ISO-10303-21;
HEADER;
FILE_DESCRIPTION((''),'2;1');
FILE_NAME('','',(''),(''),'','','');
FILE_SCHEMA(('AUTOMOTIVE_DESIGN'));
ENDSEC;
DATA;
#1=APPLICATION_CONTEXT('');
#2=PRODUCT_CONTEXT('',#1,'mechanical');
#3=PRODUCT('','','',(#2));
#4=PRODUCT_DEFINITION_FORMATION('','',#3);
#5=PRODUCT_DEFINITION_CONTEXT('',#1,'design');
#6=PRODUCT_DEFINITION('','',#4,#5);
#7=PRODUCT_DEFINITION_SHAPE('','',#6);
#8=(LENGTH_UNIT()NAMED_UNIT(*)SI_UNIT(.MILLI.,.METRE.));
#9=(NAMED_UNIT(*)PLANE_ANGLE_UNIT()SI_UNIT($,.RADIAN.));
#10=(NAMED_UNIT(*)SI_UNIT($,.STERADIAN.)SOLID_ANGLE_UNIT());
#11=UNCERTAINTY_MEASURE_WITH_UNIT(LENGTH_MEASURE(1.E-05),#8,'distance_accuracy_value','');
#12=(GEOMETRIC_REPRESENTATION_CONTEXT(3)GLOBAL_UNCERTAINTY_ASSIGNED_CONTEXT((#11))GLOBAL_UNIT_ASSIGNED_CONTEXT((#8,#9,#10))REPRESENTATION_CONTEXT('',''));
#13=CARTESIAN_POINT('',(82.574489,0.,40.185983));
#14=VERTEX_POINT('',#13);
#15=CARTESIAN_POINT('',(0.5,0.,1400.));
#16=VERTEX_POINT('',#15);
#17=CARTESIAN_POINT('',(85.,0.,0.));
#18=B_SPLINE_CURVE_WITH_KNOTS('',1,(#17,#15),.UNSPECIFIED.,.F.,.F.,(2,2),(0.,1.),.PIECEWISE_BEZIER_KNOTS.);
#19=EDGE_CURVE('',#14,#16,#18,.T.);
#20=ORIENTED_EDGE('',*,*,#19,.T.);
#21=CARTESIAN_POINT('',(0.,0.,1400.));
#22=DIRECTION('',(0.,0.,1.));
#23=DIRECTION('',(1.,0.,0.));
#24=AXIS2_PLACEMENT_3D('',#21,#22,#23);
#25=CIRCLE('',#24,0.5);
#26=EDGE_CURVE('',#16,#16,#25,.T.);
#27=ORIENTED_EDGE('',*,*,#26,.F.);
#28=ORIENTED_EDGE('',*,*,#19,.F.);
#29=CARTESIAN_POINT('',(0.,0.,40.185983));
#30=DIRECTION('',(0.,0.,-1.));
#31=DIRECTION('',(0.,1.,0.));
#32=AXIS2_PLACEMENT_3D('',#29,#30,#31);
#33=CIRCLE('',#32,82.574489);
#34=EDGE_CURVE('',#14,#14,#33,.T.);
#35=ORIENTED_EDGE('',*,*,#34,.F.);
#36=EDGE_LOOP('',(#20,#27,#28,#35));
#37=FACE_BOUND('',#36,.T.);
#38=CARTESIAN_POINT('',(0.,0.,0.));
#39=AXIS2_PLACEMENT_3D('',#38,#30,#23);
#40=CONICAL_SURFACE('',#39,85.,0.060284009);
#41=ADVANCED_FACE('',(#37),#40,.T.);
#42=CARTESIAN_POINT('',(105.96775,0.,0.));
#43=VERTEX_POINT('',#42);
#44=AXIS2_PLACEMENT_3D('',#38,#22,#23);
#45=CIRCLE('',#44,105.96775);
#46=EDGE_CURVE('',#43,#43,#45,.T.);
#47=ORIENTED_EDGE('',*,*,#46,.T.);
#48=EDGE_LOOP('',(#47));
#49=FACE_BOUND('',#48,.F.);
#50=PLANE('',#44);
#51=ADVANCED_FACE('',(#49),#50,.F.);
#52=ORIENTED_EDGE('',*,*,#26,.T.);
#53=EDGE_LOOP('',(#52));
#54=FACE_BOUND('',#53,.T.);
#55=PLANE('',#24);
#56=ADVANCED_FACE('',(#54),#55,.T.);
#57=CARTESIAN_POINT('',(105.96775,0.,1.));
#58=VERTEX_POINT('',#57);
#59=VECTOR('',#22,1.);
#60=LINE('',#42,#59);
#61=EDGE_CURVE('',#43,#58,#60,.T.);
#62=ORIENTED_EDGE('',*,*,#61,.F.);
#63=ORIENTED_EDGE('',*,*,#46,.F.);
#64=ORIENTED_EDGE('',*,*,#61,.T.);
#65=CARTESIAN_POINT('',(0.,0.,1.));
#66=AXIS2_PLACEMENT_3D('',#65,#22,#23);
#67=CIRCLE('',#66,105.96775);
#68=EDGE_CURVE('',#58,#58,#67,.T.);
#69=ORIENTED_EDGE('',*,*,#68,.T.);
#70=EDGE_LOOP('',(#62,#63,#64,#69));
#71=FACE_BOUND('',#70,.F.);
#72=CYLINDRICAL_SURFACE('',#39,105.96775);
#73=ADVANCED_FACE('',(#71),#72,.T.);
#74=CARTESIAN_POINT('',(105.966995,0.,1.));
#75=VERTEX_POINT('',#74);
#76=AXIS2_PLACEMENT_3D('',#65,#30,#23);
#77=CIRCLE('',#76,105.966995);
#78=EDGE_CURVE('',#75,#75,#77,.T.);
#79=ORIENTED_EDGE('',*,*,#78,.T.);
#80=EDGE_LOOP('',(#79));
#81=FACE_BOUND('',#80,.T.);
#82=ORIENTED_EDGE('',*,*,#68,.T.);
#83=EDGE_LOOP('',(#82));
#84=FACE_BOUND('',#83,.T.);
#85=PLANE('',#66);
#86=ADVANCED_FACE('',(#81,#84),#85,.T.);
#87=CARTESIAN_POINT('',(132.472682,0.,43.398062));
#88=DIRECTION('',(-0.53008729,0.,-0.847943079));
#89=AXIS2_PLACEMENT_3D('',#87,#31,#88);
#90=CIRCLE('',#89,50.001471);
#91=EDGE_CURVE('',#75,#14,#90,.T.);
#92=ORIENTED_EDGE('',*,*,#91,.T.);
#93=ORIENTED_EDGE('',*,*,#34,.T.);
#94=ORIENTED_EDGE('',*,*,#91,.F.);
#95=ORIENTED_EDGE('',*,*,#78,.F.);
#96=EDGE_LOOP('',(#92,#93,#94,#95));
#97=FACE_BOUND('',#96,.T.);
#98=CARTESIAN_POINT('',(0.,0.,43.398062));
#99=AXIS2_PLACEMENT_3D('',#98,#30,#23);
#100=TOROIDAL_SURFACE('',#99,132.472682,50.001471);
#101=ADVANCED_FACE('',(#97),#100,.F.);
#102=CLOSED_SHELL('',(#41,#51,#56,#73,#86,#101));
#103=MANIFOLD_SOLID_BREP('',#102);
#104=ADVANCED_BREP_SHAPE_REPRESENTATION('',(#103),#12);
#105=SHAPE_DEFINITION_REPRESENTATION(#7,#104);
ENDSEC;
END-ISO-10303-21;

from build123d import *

# Parameters (mm, degrees)
F0_R     = 85
F2_R     = 0.5
F4_R     = 105.9677495378
F5_DEPTH = 1


# Not quite as in the source:
# - a fillet or chamfer that OpenCascade refuses, or shapes differently, is made with other operations: its cross-section is extruded or revolved along the edge and cut away or added


with BuildPart() as f3:
    # F0 (on Top) → F3 section 0
    with BuildSketch(Plane.XY):
        Circle(F0_R)
    # F2 (on offset) → F3 section 1
    with BuildSketch(Plane.XY.offset(1400)):
        Circle(F2_R)
    loft()

    # F4 (on Top) → F5 (join)
    with BuildSketch(Plane.XY):
        Circle(F4_R)
    extrude(amount=F5_DEPTH)

    # F6: fillet of radius 50 on 1 edges, made by hand


with BuildPart() as f6_tool2:
    # F6_s3 → F6_t4 (revolve)
    with BuildSketch(Plane.XZ):
        with BuildLine():
            ThreePointArc((105.9675375029, 0.9996608228), (89.4883112296, 17.8541588617), (82.5620399387, 40.3855984233))
            Line((82.5620399387, 40.3855984233), (77.5709757484, 40.0843520489))
            ThreePointArc((77.5709757484, 40.0843520489), (78.7599768444, 20.3915648868), (79.9485786669, 0.6987536257))
            Line((79.9485786669, 0.6987536257), (84.9396428571, -4.0001471107))
            ThreePointArc((84.9396428571, -4.0001471107), (95.45359018, -4.0001471107), (103.3170230691, -3.2401793116))
            Line((103.3170230691, -3.2401793116), (105.9675375029, 0.9996608228))
        make_face()
    revolve(axis=Axis((0, 0, 1), (0, 0, 1)))

    split(bisect_by=Plane.XY, keep=Keep.TOP)


with BuildPart() as f3_1:
    add(f3.part)

    # F6_t1: union F6_tool2
    add(f6_tool2.part)


solid = f3_1.part
